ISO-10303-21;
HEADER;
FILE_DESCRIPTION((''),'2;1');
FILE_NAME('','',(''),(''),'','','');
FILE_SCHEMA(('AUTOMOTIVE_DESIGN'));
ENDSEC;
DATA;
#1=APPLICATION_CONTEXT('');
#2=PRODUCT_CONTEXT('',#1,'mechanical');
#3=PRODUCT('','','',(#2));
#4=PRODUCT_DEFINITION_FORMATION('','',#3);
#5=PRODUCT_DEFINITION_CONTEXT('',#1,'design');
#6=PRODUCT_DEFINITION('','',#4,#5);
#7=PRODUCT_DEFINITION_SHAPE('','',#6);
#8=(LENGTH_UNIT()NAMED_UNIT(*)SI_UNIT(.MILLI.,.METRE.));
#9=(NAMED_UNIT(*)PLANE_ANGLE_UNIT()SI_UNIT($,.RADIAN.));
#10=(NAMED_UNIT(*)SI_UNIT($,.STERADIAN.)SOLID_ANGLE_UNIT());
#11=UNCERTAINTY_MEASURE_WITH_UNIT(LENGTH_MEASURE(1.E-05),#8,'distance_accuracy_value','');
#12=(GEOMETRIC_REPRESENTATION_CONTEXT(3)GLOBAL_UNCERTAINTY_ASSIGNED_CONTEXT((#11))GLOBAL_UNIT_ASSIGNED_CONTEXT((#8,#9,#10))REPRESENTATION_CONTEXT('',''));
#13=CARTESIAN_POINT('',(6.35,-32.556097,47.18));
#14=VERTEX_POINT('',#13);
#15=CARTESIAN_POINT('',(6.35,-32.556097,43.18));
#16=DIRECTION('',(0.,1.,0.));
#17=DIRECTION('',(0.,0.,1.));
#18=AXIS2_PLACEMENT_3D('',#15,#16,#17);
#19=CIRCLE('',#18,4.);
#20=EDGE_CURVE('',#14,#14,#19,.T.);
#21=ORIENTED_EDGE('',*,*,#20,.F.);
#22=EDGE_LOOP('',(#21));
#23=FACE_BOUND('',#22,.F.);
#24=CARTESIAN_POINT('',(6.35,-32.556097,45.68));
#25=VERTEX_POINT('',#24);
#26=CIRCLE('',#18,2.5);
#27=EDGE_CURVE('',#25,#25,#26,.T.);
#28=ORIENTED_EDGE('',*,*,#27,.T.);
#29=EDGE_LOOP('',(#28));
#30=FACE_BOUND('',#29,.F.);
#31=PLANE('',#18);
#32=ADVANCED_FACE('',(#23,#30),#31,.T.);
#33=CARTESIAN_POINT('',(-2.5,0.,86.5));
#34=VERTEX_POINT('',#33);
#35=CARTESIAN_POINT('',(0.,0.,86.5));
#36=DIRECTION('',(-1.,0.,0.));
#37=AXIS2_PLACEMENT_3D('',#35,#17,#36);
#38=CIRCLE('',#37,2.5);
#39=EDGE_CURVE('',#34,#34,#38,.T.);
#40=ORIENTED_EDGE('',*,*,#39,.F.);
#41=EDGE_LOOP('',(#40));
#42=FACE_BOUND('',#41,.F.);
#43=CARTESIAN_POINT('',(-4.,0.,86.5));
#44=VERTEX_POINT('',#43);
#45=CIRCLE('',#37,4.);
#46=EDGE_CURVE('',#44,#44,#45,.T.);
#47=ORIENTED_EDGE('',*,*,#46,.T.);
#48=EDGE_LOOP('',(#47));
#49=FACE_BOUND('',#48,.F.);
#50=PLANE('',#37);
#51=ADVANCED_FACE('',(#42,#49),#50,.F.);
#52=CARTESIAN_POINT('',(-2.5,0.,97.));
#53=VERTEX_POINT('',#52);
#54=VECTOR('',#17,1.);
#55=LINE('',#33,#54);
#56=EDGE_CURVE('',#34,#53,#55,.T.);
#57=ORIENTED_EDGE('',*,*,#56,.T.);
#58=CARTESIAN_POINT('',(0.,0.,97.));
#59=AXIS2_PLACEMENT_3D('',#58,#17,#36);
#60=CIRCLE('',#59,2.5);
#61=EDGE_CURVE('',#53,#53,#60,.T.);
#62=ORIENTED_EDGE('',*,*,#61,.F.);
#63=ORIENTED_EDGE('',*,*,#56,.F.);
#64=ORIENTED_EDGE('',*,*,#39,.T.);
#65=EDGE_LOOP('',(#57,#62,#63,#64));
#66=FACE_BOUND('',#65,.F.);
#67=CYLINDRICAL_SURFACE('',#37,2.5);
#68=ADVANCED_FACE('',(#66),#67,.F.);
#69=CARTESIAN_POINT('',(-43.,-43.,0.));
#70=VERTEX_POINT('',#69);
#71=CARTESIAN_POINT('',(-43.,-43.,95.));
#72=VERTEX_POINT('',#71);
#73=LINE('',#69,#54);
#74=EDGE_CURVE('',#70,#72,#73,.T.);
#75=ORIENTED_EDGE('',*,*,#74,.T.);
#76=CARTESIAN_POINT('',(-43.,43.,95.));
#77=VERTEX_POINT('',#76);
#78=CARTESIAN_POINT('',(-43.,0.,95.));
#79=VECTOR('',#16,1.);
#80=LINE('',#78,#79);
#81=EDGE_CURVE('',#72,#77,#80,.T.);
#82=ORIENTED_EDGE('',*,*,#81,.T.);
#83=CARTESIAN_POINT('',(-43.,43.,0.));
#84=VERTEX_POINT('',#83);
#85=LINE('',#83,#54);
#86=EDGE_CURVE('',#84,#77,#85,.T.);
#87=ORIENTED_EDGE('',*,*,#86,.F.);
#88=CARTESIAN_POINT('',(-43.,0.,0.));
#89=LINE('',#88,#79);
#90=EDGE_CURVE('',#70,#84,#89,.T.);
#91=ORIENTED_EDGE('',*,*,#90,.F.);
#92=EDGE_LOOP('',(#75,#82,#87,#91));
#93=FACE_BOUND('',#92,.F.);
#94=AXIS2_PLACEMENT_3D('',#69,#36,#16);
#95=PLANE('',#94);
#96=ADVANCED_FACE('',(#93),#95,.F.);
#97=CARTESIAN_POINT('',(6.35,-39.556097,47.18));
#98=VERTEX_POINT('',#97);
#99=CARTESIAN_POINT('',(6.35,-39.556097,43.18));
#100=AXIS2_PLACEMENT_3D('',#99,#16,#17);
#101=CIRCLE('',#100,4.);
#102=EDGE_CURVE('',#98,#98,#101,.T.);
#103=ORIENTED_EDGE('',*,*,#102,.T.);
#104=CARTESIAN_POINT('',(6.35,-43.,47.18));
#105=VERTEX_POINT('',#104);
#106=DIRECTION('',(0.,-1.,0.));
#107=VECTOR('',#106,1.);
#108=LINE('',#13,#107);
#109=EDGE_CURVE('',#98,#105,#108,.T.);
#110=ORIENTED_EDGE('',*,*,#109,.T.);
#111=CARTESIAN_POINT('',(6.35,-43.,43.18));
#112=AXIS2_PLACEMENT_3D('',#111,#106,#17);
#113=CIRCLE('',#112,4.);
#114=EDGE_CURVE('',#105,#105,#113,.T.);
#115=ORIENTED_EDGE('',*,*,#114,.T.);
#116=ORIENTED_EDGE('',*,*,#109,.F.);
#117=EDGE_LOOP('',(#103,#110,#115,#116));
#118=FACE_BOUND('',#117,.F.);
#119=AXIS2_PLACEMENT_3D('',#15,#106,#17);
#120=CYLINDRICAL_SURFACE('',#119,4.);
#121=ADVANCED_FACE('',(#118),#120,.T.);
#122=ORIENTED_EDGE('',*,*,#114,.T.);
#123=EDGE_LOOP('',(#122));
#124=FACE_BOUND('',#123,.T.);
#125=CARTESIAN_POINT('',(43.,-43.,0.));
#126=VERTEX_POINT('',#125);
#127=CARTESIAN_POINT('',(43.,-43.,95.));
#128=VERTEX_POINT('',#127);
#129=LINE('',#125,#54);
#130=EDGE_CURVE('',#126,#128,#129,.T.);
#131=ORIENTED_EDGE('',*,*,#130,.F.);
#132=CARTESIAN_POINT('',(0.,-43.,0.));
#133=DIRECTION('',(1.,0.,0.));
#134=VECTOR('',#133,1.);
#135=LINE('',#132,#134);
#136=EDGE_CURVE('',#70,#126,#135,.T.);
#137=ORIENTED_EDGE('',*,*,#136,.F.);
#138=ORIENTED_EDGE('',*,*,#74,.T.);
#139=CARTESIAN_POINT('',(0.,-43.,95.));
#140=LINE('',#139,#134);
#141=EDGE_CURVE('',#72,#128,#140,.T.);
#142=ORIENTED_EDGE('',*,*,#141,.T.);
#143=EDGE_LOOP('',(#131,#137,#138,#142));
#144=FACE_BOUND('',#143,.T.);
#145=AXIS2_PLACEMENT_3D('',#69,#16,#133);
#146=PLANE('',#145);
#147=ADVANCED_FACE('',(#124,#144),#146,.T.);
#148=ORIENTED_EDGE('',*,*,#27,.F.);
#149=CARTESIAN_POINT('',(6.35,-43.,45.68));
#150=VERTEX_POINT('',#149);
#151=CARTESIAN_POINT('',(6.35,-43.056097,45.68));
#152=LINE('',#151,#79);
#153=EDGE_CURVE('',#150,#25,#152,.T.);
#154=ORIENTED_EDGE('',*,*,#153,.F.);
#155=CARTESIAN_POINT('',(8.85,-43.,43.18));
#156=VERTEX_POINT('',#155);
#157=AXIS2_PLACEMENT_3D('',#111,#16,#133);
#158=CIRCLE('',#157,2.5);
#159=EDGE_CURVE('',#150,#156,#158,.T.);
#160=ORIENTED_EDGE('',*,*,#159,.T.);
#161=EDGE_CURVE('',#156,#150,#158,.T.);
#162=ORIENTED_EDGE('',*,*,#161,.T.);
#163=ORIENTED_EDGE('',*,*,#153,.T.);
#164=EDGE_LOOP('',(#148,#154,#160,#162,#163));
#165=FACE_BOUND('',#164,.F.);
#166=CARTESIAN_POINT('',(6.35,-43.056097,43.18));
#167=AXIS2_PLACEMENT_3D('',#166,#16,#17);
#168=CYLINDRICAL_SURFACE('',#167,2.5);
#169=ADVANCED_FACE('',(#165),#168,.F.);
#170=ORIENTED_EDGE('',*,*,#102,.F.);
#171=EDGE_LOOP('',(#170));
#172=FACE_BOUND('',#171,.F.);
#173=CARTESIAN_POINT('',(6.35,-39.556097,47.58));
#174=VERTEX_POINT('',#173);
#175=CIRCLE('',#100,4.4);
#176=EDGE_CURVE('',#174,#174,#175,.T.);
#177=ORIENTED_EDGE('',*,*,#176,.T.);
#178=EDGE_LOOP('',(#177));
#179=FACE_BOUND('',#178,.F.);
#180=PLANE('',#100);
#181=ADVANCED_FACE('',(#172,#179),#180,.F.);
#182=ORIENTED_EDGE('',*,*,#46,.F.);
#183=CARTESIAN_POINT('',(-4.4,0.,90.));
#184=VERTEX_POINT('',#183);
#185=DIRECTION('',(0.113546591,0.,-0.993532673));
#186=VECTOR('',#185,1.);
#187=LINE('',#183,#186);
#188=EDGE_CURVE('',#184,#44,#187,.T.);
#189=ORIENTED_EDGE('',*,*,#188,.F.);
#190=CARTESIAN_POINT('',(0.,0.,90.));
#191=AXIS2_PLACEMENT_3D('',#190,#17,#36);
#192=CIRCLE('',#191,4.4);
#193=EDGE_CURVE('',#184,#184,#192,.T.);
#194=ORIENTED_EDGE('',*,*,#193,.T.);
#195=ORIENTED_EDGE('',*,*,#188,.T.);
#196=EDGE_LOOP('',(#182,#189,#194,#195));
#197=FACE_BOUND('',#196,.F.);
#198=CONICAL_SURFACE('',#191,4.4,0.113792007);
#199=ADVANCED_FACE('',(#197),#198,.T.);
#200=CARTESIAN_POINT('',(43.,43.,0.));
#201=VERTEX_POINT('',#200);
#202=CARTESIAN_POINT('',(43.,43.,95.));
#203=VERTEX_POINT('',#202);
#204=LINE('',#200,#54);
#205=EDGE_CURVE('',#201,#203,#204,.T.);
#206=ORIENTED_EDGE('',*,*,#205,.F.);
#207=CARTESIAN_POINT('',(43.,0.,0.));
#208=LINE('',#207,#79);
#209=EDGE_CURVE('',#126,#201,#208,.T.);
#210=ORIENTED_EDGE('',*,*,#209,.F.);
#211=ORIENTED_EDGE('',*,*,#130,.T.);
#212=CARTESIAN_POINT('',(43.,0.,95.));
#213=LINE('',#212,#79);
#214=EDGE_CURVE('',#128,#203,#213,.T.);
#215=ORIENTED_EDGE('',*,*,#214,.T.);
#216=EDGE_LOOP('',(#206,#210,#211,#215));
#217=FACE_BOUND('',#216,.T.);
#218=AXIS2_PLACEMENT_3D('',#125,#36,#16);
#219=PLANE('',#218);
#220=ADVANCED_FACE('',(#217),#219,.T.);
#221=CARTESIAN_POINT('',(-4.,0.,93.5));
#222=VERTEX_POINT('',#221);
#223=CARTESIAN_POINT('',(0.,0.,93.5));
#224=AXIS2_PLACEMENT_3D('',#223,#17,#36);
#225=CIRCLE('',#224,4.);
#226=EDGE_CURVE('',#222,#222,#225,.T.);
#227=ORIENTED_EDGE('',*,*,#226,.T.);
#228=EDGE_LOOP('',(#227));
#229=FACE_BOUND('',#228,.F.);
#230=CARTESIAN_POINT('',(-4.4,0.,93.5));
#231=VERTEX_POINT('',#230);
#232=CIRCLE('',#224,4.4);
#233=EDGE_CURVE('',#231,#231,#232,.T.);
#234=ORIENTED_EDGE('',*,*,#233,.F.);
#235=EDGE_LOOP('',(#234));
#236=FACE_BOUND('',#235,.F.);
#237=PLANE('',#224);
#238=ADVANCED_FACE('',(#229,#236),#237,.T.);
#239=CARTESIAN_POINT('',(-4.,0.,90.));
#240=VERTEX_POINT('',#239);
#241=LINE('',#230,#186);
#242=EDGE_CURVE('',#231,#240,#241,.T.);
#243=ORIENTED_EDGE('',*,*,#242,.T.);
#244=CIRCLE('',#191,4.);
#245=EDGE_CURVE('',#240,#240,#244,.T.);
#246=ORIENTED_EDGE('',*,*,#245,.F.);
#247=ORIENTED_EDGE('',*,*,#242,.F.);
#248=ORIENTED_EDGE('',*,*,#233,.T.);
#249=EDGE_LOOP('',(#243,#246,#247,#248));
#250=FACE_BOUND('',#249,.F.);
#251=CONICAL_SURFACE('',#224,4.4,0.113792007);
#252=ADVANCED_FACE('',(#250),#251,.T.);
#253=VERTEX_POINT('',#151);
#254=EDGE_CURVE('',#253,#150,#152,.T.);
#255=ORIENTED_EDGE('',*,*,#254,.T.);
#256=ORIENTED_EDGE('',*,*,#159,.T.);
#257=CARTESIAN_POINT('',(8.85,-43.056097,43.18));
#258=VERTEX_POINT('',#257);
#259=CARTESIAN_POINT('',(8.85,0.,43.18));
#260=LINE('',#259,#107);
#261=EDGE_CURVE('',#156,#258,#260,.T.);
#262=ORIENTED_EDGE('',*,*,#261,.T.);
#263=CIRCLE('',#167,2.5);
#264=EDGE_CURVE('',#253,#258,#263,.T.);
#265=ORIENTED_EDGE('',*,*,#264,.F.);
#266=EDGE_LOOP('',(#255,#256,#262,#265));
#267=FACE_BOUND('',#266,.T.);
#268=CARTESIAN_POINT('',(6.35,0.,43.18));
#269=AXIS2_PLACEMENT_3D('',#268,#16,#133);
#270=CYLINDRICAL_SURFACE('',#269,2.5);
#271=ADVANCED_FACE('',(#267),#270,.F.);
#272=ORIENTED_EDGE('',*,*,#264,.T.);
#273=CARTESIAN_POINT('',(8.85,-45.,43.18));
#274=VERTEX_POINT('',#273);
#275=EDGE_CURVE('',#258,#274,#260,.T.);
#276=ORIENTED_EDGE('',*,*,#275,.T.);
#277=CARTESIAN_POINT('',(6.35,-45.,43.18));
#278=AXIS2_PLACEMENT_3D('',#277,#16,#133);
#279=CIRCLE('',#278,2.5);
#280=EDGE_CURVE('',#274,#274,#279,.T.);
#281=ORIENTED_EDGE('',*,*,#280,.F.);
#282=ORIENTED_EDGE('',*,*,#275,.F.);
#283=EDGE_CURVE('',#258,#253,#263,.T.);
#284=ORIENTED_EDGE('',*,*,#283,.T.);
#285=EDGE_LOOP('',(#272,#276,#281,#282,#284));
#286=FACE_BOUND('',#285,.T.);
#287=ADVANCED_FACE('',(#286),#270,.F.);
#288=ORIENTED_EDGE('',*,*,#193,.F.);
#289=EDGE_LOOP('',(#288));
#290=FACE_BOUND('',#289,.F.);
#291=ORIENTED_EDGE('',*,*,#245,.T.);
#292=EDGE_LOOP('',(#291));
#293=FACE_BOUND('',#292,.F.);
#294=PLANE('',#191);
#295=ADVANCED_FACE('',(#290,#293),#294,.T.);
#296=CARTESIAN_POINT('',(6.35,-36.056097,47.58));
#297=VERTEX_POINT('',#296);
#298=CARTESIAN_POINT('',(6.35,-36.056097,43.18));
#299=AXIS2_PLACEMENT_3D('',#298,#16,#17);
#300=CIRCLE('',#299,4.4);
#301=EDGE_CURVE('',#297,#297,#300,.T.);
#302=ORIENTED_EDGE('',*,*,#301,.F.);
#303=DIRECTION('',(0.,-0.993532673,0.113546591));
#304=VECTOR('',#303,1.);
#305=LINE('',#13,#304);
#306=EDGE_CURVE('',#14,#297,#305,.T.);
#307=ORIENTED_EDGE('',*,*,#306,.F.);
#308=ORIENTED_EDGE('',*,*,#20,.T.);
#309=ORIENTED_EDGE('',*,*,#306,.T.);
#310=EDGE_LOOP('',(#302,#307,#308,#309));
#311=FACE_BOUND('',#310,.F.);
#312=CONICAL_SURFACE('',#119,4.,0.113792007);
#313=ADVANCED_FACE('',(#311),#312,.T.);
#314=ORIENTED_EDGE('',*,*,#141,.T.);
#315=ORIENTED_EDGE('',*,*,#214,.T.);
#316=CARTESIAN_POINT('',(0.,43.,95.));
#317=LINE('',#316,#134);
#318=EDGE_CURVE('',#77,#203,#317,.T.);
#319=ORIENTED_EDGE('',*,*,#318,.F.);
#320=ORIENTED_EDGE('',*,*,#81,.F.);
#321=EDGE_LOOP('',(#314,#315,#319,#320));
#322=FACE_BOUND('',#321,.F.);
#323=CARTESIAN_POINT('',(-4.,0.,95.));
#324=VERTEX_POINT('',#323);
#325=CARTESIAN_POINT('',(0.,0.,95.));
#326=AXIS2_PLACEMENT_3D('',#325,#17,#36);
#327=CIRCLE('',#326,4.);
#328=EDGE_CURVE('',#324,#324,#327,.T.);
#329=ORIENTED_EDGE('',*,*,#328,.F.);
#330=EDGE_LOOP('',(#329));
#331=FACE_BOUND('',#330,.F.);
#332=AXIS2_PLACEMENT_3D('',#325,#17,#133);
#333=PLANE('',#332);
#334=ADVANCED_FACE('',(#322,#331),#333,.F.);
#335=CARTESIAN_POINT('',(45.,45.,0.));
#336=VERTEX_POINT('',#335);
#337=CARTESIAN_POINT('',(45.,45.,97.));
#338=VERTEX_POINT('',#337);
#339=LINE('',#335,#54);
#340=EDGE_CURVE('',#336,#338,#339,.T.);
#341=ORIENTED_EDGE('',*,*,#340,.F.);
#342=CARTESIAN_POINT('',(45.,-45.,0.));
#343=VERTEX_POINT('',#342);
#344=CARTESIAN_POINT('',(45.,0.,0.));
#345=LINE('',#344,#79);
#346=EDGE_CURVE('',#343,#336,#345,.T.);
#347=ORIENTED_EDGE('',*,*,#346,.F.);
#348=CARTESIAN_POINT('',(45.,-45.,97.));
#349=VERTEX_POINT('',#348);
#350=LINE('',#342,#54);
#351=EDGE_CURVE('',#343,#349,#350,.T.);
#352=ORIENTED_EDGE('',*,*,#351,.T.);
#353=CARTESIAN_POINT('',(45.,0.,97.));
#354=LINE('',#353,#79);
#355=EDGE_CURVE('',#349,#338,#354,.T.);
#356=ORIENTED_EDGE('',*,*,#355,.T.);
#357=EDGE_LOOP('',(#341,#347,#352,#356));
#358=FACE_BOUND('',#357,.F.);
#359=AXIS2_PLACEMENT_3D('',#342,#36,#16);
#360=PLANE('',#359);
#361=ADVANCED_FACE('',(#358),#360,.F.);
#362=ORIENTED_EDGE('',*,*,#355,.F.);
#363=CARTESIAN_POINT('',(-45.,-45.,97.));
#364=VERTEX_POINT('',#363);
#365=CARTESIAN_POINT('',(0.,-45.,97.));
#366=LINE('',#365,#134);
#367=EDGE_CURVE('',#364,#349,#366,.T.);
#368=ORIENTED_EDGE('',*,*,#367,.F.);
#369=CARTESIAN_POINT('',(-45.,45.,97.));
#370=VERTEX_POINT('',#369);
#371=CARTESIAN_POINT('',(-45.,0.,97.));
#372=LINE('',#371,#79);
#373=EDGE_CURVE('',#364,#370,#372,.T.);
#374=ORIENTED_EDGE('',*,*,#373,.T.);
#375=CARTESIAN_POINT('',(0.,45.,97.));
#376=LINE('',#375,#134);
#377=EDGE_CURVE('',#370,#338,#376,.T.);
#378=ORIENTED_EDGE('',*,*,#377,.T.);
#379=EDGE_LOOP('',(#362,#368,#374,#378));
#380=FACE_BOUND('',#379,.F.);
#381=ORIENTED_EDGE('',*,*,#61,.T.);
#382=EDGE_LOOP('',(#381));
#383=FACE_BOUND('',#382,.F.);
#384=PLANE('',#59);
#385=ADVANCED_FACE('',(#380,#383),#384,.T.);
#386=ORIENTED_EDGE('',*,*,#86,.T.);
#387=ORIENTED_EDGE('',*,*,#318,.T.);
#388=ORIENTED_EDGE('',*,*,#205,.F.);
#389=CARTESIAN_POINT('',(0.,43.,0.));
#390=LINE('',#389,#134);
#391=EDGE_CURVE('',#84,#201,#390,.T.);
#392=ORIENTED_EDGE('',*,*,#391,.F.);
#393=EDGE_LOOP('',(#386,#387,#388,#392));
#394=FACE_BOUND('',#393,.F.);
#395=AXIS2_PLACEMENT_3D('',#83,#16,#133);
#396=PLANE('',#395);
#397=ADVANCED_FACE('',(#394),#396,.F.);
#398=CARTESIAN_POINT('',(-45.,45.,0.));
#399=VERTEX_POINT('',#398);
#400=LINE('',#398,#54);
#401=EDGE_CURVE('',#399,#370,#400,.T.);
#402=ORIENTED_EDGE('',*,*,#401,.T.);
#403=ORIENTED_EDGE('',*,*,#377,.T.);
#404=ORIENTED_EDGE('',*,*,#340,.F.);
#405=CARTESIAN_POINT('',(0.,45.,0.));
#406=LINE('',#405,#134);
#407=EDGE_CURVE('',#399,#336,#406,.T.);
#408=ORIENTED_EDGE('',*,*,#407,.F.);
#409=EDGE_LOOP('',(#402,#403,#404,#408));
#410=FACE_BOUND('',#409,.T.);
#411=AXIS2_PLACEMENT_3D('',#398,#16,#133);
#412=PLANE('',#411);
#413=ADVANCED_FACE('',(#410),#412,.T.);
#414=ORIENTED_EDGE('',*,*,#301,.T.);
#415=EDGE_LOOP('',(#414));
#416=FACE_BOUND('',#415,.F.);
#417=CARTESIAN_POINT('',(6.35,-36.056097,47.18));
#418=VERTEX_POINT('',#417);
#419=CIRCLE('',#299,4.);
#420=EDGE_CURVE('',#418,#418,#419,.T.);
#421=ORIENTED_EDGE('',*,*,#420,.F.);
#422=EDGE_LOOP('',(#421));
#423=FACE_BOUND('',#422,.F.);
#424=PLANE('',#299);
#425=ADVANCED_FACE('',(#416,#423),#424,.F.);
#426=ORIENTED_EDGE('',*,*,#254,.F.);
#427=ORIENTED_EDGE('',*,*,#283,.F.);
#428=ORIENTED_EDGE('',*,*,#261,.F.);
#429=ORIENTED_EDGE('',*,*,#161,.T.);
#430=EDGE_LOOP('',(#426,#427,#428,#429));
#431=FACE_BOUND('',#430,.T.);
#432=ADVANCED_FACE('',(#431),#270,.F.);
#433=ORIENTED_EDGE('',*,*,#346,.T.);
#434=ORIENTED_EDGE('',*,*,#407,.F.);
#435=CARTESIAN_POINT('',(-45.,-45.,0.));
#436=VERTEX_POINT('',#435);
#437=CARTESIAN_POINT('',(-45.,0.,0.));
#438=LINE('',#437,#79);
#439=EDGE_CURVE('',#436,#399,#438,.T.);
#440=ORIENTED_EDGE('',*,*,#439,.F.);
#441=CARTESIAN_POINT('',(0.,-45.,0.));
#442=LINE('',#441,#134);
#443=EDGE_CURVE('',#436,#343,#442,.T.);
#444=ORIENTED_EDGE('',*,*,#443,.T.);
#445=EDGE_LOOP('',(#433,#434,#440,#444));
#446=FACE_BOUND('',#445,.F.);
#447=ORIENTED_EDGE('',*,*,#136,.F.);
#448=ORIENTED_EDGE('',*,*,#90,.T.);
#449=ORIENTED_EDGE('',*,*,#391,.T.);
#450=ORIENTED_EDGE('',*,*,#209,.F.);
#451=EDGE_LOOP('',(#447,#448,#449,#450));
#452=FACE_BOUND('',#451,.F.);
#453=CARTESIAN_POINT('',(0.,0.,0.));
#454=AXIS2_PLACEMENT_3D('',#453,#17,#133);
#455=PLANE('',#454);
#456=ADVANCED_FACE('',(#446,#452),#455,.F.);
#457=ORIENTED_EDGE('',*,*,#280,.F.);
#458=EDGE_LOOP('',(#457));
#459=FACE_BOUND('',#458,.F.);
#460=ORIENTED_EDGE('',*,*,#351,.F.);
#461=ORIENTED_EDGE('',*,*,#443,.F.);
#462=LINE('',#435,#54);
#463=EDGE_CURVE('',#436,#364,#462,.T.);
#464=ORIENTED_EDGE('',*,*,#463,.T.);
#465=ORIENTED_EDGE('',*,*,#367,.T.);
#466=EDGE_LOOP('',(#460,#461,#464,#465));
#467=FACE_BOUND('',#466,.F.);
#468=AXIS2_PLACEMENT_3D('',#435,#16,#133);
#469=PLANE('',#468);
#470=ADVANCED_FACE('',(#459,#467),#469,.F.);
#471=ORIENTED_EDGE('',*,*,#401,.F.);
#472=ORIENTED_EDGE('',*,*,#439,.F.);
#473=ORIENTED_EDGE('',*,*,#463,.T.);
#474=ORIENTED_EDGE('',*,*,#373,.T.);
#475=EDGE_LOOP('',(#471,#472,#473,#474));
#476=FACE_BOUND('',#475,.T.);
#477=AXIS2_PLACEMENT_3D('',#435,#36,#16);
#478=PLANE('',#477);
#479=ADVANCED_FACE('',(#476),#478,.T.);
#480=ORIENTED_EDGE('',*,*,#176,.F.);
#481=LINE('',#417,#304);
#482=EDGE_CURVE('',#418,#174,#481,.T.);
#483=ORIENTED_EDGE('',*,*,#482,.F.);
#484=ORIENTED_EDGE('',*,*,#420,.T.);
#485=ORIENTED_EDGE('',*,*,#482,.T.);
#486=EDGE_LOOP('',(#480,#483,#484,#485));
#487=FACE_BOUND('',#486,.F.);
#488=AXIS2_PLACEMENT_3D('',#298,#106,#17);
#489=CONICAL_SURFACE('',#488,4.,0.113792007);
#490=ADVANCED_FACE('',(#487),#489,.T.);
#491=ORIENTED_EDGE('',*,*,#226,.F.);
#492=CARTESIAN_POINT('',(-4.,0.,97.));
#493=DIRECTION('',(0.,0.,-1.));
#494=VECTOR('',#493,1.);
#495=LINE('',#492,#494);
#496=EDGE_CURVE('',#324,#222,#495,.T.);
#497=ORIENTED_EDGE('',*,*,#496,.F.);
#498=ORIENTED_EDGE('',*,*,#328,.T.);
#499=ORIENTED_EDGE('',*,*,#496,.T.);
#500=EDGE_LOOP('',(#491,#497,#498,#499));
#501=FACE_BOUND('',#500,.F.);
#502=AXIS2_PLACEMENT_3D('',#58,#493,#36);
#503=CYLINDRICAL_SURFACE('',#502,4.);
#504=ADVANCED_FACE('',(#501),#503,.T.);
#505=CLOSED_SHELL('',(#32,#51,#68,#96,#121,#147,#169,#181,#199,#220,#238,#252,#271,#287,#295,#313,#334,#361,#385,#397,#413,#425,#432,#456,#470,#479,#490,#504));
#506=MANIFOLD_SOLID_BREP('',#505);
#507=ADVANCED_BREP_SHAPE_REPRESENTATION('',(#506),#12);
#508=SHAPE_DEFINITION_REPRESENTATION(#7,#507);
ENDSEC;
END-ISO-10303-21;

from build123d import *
from build123d import SkipClean  # not in build123d's __all__

# Parameters (mm, degrees)
F0_W     = 90
F0_H     = 90
F0_W_2   = 86
F0_H_2   = 86
F1_DEPTH = 97
F2_W     = 86
F2_H     = 86
F2_R     = 4
F3_DEPTH = 2
F7_R     = 2.5
F8_DEPTH = 76.2


with BuildPart() as f1:
    # F0 (on Top) → F1 (new body)
    with BuildSketch(Plane.XY):
        Rectangle(F0_W, F0_H)
        Rectangle(F0_W_2, F0_H_2, mode=Mode.SUBTRACT)
    extrude(amount=F1_DEPTH)

    # F2 (on face) → F3 (join)
    with BuildSketch(Plane.XY.offset(97)):
        Rectangle(F2_W, F2_H)
        Circle(F2_R, mode=Mode.SUBTRACT)
    extrude(amount=-F3_DEPTH)

    # F4 (on Front) → F6 (revolve)
    with BuildSketch(Plane.XZ):
        Polygon((-2.5, 97), (-4, 97), (-4, 95), (-4, 93.5), (-4.4, 93.5), (-4, 90), (-4.4, 90), (-4, 86.5), (-2.5, 86.5), align=None)
    revolve(axis=Axis((0, 0, 51.8437661231), (0, 0, 1)))

    # F7 (on Front) → F8 (cut)
    with BuildSketch(Plane.XZ):
        with Locations((6.35, 43.18)):
            Circle(F7_R)
    extrude(amount=F8_DEPTH, mode=Mode.SUBTRACT)

    # F11 (on offset) → F12 (revolve)
    with BuildSketch(Plane.YZ.offset(6.35)):
        Polygon((-39.5560968816, 47.18), (-43.0560968816, 47.18), (-43.0560968816, 45.68), (-32.5560968816, 45.68), (-32.5560968816, 47.18), (-36.0560968816, 47.18), align=None)
        Polygon((-39.5560968816, 47.58), (-39.5560968816, 47.18), (-36.0560968816, 47.18), align=None)
        Polygon((-36.0560968816, 47.58), (-36.0560968816, 47.18), (-32.5560968816, 47.18), align=None)
    with SkipClean():  # cleaning this boolean's faces spoils the solid; the shape is the same uncleaned
        revolve(axis=Axis((6.35, -16.5081392042, 43.18), (0, 1, 0)))


solid = f1.part
